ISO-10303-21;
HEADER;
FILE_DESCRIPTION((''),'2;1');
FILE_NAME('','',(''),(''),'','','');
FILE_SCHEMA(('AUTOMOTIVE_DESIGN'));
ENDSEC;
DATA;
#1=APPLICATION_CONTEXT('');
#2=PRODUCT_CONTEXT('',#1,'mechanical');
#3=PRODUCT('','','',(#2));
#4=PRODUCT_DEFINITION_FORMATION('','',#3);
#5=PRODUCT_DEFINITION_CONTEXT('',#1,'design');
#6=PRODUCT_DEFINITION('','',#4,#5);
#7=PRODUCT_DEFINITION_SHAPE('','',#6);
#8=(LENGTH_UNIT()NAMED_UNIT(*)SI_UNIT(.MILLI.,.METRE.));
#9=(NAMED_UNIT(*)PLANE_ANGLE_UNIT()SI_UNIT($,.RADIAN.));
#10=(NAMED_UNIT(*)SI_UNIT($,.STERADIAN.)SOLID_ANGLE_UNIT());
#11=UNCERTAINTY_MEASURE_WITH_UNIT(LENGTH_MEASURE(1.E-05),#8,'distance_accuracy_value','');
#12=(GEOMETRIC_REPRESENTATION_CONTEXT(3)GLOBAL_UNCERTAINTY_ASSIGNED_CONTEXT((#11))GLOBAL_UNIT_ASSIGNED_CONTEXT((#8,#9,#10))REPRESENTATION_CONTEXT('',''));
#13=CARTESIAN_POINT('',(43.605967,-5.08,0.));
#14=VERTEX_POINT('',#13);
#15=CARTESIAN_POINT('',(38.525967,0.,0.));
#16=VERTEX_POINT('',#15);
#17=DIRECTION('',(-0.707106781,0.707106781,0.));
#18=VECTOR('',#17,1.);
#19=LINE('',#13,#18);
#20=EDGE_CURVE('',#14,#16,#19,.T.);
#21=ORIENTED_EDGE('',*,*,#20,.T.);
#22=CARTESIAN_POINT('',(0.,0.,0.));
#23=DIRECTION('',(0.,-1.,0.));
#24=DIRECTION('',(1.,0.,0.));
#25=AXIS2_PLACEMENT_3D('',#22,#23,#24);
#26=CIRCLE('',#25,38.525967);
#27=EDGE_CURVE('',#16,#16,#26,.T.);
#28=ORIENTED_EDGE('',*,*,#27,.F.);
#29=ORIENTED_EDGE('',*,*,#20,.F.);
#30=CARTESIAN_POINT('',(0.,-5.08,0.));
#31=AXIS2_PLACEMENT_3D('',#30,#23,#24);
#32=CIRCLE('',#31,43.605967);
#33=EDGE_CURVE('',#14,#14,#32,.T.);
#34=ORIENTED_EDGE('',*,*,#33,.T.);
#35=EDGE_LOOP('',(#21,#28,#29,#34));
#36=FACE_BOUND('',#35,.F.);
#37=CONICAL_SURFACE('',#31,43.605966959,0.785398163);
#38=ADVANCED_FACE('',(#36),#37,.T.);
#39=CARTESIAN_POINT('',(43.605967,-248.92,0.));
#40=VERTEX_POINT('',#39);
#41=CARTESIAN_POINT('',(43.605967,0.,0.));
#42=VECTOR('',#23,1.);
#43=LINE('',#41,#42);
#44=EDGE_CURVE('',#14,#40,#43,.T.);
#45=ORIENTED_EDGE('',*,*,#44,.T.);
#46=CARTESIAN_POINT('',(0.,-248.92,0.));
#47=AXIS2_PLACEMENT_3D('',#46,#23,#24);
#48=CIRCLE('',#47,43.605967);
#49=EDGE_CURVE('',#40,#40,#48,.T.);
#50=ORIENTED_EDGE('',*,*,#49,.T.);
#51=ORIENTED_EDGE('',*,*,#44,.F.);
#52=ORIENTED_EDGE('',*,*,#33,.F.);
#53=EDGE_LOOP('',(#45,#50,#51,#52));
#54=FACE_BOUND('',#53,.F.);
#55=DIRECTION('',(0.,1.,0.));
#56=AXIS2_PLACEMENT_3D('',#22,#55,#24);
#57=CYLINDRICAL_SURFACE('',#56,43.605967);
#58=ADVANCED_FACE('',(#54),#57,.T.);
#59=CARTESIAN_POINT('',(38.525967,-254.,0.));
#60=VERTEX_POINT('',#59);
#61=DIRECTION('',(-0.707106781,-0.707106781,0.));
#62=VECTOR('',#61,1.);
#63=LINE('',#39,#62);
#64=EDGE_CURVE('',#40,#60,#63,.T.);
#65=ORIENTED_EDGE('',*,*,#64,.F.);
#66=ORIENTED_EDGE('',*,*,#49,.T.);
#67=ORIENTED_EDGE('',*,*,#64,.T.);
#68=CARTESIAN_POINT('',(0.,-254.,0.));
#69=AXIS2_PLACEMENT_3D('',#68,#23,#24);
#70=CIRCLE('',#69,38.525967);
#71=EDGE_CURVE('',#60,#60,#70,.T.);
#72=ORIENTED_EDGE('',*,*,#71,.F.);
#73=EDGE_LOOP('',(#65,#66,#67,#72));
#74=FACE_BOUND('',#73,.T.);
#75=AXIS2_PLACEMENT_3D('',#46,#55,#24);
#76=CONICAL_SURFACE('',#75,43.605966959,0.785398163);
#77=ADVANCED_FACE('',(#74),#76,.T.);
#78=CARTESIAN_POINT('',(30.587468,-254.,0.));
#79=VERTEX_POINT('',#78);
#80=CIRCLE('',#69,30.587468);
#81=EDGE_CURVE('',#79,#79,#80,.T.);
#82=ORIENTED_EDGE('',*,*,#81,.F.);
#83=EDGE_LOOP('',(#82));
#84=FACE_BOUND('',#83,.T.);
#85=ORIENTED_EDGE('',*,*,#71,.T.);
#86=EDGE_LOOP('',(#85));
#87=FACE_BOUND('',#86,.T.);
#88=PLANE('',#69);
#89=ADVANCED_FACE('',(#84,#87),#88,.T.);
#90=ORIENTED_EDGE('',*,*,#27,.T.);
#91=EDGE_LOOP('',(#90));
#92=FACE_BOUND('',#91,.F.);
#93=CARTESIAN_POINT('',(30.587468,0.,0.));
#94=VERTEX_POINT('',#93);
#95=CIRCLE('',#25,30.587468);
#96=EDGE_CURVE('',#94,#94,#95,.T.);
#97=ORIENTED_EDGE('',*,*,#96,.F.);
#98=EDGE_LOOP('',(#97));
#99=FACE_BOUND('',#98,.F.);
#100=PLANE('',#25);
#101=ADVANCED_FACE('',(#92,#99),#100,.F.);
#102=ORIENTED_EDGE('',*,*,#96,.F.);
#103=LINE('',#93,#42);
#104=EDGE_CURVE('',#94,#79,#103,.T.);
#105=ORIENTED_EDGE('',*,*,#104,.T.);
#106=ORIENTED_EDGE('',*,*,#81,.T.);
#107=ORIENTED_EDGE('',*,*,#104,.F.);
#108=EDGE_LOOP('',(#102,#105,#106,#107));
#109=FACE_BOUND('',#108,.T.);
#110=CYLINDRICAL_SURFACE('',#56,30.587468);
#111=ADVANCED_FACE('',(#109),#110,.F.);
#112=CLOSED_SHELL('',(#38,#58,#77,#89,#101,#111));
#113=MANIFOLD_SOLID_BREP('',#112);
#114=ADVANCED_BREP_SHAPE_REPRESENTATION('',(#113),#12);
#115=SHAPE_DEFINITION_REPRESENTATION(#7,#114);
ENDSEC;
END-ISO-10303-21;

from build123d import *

# Parameters (mm, degrees)
F0_R     = 43.605966959
F0_R_2   = 30.5874681623
F1_DEPTH = 254
F4_SIZE  = 5.08


# Not quite as in the source:
# - the program builds the solid bodies; features that only make, move or delete a surface that nothing else refers to are left out


with BuildPart() as f1:
    # F0 (on Front) → F1 (new body)
    with BuildSketch(Plane.XZ):
        Circle(F0_R)
        Circle(F0_R_2, mode=Mode.SUBTRACT)
    extrude(amount=F1_DEPTH)

    # F4
    f4_edges = [f1.edges().sort_by_distance(p)[0] for p in [
        (43.605967, -127, 0),
        (-43.605967, 0, 0),
        (-43.605967, -254, 0),
    ]]
    chamfer(f4_edges, length=F4_SIZE)


solid = f1.part
